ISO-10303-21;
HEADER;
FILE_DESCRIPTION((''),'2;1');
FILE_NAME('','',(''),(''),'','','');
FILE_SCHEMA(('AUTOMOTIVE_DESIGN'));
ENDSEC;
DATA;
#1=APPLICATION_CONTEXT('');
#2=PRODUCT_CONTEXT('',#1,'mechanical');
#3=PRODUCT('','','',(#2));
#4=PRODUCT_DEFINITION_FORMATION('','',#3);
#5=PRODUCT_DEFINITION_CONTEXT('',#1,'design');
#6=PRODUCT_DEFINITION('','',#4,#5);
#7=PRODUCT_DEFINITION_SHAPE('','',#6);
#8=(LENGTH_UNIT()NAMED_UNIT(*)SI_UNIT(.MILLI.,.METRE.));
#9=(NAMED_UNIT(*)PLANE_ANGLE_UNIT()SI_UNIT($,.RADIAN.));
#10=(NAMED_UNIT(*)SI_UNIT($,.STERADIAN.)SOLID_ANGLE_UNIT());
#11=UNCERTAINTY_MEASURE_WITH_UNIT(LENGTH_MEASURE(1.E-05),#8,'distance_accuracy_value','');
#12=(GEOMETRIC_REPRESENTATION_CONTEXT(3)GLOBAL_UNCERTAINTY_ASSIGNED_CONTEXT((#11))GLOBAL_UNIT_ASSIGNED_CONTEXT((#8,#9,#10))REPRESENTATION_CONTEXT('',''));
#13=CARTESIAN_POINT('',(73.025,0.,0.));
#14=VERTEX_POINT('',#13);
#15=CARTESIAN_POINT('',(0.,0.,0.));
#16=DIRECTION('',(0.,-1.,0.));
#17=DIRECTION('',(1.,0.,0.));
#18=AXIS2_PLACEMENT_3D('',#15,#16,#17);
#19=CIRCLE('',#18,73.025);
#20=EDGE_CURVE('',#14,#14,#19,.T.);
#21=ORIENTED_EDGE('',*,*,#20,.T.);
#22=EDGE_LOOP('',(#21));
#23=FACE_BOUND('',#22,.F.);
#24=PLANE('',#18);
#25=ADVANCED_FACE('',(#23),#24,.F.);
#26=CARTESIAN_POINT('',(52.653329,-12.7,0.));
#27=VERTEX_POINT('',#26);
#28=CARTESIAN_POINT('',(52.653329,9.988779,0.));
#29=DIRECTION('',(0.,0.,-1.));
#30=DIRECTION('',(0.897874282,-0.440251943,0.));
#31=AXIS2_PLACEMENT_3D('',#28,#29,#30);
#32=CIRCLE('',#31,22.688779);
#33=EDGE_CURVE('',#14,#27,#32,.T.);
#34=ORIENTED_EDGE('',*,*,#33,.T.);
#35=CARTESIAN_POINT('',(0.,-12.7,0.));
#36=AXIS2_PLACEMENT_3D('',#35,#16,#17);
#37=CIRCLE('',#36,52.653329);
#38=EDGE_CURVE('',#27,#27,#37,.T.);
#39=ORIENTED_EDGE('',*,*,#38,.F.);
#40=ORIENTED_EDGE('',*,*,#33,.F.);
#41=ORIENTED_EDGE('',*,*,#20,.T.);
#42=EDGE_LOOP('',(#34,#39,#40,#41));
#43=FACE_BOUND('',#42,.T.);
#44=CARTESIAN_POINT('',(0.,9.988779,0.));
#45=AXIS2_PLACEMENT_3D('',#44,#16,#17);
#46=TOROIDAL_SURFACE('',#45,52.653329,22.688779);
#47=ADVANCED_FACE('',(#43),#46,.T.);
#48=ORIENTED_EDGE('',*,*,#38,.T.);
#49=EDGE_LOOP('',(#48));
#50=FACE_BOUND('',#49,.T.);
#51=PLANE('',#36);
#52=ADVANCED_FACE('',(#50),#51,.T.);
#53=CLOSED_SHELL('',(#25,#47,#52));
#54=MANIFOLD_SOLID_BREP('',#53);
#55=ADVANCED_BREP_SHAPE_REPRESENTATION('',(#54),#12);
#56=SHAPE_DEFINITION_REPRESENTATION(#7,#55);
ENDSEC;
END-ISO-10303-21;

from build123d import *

# Parameters (mm, degrees)
F0_R     = 73.025
F1_DEPTH = 12.7


# Not quite as in the source:
# - a fillet or chamfer that OpenCascade refuses, or shapes differently, is made with other operations: its cross-section is extruded or revolved along the edge and cut away or added


with BuildPart() as f1:
    # F0 (on Front) → F1 (new body)
    with BuildSketch(Plane.XZ):
        Circle(F0_R)
    extrude(amount=F1_DEPTH)

    # F2: fillet of radius 22.6887790592 on 1 edges, made by hand

    # F2_s1 → F2_t2 (revolve, cut)
    with BuildSketch(Plane.XY):
        with BuildLine():
            ThreePointArc((73.025, 0), (64.6564011841, -9.2649724758), (52.6533287847, -12.7))
            Line((52.6533287847, -12.7), (73.025, -12.7))
            Line((73.025, -12.7), (73.025, 0))
        make_face()
    revolve(axis=Axis((0, -12.7, 0), (0, -1, 0)), mode=Mode.SUBTRACT)


solid = f1.part
